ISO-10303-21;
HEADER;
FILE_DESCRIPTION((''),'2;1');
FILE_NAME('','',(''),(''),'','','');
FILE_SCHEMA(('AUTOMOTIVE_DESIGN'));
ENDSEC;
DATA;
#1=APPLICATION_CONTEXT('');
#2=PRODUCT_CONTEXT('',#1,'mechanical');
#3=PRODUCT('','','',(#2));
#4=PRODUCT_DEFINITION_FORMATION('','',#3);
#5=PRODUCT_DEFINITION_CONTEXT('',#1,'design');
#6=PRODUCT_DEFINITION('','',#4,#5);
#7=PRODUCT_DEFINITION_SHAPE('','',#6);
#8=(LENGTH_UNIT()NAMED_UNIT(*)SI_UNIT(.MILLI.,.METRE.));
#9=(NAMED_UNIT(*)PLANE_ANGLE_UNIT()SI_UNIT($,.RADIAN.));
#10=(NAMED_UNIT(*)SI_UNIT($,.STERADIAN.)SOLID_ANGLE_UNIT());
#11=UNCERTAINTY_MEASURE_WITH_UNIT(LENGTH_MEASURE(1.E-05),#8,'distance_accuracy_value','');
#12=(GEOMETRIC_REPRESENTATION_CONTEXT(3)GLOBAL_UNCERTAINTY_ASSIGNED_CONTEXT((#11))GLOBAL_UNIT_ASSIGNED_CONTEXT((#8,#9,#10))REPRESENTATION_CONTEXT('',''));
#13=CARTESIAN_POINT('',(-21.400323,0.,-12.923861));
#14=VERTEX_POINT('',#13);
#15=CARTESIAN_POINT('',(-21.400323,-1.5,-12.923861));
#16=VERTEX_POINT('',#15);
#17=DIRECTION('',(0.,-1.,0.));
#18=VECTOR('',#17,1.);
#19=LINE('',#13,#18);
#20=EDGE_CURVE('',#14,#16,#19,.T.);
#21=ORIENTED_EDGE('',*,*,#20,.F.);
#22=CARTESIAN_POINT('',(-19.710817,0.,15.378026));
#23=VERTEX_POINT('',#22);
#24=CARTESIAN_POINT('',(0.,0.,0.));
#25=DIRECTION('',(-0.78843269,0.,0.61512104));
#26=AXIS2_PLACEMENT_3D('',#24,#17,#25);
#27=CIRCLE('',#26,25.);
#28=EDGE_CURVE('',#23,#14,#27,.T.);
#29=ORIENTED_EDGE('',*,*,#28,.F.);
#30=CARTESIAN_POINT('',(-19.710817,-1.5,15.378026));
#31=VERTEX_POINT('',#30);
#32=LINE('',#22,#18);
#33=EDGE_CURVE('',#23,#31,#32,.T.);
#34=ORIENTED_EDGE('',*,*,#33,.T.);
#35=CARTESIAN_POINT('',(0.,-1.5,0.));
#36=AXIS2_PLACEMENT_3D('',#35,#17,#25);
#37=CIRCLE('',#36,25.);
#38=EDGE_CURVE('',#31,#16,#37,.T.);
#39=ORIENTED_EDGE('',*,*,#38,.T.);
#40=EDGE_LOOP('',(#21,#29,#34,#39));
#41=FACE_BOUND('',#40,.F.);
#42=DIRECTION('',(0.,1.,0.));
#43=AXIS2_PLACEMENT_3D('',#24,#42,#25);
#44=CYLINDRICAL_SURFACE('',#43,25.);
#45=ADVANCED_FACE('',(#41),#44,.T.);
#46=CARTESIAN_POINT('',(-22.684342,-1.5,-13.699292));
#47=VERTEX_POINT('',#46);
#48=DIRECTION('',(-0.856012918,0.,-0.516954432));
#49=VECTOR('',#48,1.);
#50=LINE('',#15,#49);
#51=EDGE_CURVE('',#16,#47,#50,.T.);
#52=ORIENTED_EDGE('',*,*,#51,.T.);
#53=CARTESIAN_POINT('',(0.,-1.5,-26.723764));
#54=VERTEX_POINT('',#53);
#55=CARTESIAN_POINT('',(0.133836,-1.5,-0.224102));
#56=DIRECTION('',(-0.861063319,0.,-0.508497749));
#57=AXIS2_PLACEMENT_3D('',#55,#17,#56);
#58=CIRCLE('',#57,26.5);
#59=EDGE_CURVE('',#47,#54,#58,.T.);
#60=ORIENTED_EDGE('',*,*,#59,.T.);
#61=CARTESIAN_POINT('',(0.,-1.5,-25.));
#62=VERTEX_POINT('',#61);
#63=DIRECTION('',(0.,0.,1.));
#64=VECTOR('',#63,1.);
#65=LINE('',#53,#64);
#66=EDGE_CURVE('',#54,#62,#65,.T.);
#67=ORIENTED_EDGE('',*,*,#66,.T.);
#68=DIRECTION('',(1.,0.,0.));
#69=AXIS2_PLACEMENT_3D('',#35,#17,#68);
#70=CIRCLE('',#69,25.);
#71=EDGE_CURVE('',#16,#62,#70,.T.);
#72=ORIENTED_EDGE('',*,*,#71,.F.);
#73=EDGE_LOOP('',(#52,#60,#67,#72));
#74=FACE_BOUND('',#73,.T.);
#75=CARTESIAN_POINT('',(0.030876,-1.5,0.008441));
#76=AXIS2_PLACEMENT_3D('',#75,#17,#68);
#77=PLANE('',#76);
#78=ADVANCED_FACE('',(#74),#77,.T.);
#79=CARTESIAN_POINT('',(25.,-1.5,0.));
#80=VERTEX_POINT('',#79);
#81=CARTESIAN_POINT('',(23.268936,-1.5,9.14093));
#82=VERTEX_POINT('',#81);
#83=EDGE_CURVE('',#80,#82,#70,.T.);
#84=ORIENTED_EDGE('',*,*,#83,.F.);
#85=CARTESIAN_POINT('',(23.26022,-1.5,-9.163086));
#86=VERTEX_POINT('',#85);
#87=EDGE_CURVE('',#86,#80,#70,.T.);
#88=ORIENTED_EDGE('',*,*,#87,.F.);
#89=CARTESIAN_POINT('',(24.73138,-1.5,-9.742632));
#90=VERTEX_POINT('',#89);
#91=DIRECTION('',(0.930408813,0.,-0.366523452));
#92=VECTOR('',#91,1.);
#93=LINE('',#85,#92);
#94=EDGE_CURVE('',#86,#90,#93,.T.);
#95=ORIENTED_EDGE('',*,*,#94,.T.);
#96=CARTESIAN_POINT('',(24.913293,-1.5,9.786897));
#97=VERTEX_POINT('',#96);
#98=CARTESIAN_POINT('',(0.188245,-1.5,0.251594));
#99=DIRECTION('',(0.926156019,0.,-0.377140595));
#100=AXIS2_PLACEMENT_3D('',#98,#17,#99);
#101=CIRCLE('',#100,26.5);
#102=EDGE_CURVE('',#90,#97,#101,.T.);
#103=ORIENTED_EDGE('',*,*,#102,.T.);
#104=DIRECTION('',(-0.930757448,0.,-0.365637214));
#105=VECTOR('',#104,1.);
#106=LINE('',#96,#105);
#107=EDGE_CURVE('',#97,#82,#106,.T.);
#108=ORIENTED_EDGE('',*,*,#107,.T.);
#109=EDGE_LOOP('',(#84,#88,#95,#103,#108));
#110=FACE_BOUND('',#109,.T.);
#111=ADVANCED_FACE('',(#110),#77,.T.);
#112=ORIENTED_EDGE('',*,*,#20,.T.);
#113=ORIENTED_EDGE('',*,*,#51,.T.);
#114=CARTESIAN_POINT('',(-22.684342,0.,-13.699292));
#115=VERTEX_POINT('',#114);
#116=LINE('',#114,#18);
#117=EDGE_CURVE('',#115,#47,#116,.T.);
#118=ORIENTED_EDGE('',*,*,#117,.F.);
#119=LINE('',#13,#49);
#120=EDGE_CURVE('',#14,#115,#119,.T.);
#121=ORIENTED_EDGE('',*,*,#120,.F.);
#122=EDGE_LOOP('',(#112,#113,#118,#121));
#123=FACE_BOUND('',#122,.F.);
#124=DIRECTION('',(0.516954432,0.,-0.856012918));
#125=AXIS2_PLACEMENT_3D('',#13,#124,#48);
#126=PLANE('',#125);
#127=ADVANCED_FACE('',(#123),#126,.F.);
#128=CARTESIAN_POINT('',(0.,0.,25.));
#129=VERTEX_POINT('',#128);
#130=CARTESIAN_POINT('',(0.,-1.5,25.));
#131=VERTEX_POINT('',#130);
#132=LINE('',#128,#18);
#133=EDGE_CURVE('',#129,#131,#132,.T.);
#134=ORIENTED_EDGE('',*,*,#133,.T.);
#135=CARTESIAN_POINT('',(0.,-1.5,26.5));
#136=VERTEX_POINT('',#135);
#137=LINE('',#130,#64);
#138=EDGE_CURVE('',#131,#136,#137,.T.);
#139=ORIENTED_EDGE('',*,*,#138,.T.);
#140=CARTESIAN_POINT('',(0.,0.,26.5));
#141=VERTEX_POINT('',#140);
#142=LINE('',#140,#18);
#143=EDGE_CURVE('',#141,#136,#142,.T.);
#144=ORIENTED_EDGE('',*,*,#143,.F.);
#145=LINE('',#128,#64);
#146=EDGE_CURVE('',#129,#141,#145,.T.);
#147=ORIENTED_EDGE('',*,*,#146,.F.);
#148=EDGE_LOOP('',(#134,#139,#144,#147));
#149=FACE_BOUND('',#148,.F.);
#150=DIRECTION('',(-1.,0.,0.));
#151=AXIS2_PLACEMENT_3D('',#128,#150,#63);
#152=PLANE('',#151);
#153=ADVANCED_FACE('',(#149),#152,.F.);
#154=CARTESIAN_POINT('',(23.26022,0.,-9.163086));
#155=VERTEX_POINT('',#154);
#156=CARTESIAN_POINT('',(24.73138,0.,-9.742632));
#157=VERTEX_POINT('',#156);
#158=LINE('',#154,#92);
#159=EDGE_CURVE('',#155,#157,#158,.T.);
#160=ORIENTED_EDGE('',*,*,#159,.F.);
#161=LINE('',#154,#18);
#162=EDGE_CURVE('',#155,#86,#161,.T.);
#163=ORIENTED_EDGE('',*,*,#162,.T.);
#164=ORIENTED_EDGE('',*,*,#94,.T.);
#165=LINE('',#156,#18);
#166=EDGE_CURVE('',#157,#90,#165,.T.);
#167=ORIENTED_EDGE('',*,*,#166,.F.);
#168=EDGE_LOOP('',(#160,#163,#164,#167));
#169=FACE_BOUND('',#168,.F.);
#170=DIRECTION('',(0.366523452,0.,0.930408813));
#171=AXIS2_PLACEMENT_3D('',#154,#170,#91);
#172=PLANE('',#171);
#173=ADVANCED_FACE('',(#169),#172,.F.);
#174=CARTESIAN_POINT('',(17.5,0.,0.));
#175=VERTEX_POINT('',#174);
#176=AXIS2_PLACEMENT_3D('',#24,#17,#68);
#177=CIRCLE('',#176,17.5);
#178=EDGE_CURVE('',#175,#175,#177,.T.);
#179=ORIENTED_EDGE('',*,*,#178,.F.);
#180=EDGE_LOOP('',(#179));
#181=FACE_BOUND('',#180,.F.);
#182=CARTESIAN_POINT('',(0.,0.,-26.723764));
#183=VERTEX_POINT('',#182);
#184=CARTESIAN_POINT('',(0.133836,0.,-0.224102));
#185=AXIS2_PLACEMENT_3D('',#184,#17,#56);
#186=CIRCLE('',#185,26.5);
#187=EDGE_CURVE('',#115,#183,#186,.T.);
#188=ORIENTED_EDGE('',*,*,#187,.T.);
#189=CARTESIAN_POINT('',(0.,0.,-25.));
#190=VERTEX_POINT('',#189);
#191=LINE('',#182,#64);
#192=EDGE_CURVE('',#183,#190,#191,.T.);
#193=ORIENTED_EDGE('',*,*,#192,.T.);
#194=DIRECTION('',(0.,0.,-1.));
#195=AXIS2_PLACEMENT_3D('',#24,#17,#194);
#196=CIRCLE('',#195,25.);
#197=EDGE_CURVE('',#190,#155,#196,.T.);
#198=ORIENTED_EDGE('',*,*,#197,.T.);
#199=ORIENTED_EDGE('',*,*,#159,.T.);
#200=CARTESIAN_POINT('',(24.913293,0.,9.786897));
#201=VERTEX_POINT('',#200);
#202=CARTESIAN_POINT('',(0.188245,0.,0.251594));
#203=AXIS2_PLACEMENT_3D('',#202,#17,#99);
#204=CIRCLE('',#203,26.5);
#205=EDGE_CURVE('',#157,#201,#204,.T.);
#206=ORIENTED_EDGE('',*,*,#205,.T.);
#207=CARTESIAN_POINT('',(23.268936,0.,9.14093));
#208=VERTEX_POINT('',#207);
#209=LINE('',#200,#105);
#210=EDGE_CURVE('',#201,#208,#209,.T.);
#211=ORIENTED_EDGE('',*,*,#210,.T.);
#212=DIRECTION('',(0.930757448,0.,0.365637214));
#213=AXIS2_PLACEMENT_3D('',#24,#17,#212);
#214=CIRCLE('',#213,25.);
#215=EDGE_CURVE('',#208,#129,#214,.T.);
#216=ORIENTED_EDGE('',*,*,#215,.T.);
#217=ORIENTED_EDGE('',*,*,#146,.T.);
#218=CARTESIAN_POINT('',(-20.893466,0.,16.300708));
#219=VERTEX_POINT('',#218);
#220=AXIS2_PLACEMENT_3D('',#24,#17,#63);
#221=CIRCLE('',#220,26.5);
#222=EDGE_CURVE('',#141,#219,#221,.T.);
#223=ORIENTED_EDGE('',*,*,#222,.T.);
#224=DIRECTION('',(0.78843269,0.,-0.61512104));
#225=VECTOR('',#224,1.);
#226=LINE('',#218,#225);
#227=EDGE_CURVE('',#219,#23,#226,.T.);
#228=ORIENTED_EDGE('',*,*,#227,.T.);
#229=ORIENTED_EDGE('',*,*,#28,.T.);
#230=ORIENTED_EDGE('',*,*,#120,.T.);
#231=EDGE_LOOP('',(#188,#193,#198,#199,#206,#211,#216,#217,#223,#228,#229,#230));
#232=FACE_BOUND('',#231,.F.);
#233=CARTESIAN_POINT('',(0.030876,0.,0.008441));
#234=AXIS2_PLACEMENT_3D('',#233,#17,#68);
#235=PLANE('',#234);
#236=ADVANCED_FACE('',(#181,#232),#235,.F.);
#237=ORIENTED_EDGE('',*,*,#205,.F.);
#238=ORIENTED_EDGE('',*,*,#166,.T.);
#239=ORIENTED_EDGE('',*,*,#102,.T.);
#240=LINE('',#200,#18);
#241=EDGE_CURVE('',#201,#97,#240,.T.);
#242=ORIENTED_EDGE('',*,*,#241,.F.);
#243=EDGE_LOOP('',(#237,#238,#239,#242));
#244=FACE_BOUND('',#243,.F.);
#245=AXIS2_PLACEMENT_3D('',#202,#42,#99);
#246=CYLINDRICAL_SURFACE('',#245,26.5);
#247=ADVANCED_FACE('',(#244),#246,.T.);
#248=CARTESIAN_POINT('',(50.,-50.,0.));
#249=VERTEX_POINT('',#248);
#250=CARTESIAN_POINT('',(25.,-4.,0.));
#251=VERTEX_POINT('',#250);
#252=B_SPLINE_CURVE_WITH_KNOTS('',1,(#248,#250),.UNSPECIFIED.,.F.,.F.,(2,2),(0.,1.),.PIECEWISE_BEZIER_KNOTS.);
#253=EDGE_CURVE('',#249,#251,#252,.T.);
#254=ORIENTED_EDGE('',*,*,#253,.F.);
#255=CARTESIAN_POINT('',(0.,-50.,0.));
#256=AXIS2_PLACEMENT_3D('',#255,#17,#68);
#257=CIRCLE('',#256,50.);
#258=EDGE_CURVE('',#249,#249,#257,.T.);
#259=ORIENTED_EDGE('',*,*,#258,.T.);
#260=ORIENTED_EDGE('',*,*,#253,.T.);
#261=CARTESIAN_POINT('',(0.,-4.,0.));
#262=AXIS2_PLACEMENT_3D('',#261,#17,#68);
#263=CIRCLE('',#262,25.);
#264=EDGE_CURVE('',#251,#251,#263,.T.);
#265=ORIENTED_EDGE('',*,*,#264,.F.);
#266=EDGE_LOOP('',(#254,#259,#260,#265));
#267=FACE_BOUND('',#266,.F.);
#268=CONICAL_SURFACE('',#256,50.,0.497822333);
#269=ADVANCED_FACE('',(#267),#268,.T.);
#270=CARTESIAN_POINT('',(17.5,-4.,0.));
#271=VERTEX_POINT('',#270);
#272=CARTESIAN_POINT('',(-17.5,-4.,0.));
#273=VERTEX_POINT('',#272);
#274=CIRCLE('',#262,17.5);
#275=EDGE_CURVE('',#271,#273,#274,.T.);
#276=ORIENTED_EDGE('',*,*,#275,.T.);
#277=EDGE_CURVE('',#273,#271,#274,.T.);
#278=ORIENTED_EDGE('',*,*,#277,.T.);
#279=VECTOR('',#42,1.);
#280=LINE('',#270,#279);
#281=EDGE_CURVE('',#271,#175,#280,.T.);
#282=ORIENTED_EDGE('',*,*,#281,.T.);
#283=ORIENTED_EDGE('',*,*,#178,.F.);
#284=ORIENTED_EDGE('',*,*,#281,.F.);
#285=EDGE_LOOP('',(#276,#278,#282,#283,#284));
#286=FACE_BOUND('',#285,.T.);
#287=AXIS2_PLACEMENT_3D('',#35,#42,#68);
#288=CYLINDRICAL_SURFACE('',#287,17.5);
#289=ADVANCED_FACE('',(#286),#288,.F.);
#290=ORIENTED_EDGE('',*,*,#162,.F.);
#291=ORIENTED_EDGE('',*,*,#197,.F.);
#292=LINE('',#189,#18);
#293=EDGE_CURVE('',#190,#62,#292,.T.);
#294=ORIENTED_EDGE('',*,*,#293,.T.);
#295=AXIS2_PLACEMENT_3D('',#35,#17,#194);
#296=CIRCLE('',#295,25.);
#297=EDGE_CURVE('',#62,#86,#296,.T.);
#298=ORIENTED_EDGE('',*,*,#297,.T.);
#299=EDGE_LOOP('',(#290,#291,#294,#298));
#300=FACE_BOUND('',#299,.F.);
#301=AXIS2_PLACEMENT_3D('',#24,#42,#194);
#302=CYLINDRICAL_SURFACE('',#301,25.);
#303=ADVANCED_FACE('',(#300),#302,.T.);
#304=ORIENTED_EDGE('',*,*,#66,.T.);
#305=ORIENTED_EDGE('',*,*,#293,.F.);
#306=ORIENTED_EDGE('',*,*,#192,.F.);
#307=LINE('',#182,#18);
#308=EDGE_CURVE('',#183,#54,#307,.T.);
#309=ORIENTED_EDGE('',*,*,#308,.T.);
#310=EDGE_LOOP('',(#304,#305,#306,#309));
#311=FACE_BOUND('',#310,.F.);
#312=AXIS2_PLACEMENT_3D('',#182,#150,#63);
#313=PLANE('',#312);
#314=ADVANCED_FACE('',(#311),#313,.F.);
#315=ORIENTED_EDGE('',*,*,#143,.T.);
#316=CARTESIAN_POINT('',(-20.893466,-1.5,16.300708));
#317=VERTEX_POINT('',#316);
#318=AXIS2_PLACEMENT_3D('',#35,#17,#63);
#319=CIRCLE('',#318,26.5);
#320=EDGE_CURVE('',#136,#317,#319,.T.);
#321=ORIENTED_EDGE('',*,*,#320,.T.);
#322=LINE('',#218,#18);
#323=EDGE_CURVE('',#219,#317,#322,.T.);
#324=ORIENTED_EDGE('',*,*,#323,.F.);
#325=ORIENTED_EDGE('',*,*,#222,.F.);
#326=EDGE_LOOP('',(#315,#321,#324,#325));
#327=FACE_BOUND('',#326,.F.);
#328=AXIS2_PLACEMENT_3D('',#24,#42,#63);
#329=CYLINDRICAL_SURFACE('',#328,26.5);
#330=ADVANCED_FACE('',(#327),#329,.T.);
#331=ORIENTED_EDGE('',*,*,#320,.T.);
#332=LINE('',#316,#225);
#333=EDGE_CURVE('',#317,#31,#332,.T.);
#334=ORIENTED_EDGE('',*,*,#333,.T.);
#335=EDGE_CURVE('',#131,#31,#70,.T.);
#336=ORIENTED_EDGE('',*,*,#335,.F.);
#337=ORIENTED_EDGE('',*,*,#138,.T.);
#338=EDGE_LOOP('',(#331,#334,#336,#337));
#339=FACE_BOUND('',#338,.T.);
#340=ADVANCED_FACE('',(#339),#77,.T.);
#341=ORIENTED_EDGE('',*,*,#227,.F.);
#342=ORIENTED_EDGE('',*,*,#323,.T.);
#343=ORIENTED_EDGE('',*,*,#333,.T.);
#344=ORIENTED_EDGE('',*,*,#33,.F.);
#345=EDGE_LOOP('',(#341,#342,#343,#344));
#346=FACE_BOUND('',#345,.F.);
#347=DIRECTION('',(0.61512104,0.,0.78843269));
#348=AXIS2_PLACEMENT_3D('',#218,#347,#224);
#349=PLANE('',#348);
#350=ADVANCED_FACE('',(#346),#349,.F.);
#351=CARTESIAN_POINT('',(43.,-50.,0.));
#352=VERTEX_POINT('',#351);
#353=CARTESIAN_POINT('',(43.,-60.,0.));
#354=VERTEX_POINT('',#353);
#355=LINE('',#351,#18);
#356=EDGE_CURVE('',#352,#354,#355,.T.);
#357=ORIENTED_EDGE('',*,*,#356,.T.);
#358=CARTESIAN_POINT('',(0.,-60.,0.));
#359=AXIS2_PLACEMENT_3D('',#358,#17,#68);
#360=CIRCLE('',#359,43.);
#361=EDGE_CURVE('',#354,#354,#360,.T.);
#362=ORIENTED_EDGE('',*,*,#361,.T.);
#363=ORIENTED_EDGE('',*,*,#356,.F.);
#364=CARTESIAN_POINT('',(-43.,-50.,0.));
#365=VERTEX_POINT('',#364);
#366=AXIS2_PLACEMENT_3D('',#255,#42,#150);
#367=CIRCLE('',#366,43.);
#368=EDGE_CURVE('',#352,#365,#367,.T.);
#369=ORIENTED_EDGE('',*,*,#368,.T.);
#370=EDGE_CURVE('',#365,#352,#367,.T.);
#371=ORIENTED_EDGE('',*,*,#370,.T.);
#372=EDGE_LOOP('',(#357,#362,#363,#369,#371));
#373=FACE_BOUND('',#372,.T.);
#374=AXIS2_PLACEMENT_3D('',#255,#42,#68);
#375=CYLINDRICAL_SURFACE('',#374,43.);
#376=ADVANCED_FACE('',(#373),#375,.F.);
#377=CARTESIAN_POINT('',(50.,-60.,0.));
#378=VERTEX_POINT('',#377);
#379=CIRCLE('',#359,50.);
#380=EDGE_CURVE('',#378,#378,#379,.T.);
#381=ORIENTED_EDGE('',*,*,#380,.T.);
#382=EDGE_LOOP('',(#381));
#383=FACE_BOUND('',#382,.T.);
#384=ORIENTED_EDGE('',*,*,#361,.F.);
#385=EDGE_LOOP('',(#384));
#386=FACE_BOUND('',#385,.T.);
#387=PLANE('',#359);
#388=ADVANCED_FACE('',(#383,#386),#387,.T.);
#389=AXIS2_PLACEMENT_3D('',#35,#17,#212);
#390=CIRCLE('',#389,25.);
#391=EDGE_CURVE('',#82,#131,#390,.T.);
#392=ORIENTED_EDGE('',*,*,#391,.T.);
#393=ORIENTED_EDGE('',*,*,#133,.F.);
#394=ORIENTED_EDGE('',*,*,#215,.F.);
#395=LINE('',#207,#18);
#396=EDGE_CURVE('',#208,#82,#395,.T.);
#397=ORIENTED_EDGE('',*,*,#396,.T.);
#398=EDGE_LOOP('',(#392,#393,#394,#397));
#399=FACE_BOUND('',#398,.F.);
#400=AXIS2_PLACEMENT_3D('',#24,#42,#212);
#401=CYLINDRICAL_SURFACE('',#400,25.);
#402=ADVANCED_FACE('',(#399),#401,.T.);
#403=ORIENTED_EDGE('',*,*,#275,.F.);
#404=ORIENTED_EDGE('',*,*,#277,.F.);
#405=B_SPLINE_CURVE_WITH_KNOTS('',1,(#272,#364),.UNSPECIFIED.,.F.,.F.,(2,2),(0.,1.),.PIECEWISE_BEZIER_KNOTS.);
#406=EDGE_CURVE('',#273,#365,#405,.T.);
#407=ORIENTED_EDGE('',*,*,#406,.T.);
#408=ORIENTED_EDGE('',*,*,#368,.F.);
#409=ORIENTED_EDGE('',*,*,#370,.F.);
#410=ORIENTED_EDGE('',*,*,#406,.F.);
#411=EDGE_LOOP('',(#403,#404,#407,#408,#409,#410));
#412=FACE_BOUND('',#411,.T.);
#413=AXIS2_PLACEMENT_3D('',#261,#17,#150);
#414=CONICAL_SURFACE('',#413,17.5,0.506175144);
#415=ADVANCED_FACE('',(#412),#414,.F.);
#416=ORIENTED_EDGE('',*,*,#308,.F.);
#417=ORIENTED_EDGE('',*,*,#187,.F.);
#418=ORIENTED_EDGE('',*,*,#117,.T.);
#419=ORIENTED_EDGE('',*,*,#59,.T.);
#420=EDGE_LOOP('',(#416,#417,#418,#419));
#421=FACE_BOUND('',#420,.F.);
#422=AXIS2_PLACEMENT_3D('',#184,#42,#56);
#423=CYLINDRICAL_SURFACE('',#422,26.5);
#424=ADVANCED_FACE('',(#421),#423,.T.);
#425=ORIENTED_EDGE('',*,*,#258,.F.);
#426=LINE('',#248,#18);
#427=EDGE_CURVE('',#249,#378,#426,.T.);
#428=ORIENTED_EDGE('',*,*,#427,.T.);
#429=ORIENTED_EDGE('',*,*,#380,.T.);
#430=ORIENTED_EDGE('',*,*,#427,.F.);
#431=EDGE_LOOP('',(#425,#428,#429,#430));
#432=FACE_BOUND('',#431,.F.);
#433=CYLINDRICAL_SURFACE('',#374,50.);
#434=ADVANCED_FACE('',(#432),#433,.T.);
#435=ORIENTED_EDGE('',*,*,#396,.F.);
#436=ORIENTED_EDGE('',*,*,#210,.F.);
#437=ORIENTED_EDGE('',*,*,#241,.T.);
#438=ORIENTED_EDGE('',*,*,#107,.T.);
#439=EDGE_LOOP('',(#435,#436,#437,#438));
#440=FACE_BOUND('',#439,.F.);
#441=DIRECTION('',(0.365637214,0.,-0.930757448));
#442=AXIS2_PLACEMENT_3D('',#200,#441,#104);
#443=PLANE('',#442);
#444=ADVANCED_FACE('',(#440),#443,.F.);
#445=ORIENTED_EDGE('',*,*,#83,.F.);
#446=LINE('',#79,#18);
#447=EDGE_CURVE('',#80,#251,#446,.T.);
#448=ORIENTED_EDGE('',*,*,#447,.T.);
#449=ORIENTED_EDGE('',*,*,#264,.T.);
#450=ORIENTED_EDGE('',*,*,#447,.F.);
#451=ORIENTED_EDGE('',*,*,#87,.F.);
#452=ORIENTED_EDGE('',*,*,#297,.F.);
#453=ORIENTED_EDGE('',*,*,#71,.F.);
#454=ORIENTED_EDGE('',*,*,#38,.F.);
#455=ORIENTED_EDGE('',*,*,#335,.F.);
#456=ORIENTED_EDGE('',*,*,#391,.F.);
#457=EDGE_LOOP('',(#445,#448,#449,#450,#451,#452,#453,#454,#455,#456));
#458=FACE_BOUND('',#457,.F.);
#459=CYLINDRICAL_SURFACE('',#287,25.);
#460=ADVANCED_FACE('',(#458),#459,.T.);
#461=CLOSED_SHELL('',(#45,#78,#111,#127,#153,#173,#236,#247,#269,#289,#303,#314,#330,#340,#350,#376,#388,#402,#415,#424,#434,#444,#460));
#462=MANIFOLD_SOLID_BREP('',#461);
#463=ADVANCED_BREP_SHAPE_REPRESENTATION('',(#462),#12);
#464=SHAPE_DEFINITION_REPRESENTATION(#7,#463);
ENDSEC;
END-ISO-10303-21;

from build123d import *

# Parameters (mm, degrees)
F0_R      = 17.5
F1_DEPTH  = 1.5
F2_R      = 25
F2_R_2    = 17.5
F3_DEPTH  = 2.5
F6_R      = 50
F5_R      = 25
F9_R      = 17.5
F8_R      = 43
F11_R     = 50
F11_R_2   = 43
F12_DEPTH = 10


with BuildPart() as f1:
    # F0 (on Front) → F1 (new body)
    with BuildSketch(Plane.XZ):
        with BuildLine():
            ThreePointArc((23.2602203248, -9.1630862947), (24.5612042469, -4.663394251), (25, 0))
            ThreePointArc((25, 0), (24.5634220452, 4.651698338), (23.2689362058, 9.1409303603))
            ThreePointArc((23.2689362058, 9.1409303603), (14.0797148585, 20.6582097362), (0, 25))
            ThreePointArc((0, 25), (-10.9669811321, 22.4660927811), (-19.7108172513, 15.3780259879))
            ThreePointArc((-19.7108172513, 15.3780259879), (-24.9555737451, 1.4897446272), (-21.4003229393, -12.9238608046))
            ThreePointArc((-21.4003229393, -12.9238608046), (-12.2862418967, -21.7726493578), (0, -25))
            ThreePointArc((0, -25), (14.0698763789, -20.6649117754), (23.2602203248, -9.1630862947))
        make_face()
        Circle(F0_R, mode=Mode.SUBTRACT)
        with BuildLine():
            ThreePointArc((23.2689362058, 9.1409303603), (24.5634220452, 4.651698338), (25, 0))
            ThreePointArc((25, 0), (24.5612042469, -4.663394251), (23.2602203248, -9.1630862947))
            Line((23.2602203248, -9.1630862947), (24.7313799339, -9.7426320713))
            ThreePointArc((24.7313799339, -9.7426320713), (26.6870958696, 0.0047625742), (24.9132933265, 9.7868968881))
            Line((24.9132933265, 9.7868968881), (23.2689362058, 9.1409303603))
        make_face()
        with BuildLine():
            ThreePointArc((-19.7108172513, 15.3780259879), (-10.9669811321, 22.4660927811), (0, 25))
            Line((0, 25), (0, 26.5))
            ThreePointArc((0, 26.5), (-11.625, 23.814058348), (-20.8934662864, 16.3007075472))
            Line((-20.8934662864, 16.3007075472), (-19.7108172513, 15.3780259879))
        make_face()
        with BuildLine():
            Line((0, -26.7237641467), (0, -25))
            ThreePointArc((0, -25), (-12.2862418967, -21.7726493578), (-21.4003229393, -12.9238608046))
            Line((-21.4003229393, -12.9238608046), (-22.6843423156, -13.6992924528))
            ThreePointArc((-22.6843423156, -13.6992924528), (-13.0611614327, -23.205443504), (0, -26.7237641467))
        make_face()
    extrude(amount=F1_DEPTH)

    # F2 (on face) → F3 (join)
    with BuildSketch(Plane.XZ.offset(1.5)):
        Circle(F2_R)
        Circle(F2_R_2, mode=Mode.SUBTRACT)
    extrude(amount=F3_DEPTH)

    # F6 (on offset) → F7 section 0
    with BuildSketch(Plane.XZ.offset(50)):
        Circle(F6_R)
    # F5 (on face) → F7 section 1
    with BuildSketch(Plane.XZ.offset(4)):
        Circle(F5_R)
    loft()

    # F9 (on face) → F10 section 0
    with BuildSketch(Plane(origin=(0, -4, 0), x_dir=(-1, 0, 0), z_dir=(0, 1, 0))):
        Circle(F9_R)
    # F8 (on face) → F10 section 1
    with BuildSketch(Plane.XZ.offset(50)):
        Circle(F8_R)
    loft(mode=Mode.SUBTRACT)

    # F11 (on face) → F12 (join)
    with BuildSketch(Plane.XZ.offset(50)):
        Circle(F11_R)
        Circle(F11_R_2, mode=Mode.SUBTRACT)
    extrude(amount=F12_DEPTH)


solid = f1.part
